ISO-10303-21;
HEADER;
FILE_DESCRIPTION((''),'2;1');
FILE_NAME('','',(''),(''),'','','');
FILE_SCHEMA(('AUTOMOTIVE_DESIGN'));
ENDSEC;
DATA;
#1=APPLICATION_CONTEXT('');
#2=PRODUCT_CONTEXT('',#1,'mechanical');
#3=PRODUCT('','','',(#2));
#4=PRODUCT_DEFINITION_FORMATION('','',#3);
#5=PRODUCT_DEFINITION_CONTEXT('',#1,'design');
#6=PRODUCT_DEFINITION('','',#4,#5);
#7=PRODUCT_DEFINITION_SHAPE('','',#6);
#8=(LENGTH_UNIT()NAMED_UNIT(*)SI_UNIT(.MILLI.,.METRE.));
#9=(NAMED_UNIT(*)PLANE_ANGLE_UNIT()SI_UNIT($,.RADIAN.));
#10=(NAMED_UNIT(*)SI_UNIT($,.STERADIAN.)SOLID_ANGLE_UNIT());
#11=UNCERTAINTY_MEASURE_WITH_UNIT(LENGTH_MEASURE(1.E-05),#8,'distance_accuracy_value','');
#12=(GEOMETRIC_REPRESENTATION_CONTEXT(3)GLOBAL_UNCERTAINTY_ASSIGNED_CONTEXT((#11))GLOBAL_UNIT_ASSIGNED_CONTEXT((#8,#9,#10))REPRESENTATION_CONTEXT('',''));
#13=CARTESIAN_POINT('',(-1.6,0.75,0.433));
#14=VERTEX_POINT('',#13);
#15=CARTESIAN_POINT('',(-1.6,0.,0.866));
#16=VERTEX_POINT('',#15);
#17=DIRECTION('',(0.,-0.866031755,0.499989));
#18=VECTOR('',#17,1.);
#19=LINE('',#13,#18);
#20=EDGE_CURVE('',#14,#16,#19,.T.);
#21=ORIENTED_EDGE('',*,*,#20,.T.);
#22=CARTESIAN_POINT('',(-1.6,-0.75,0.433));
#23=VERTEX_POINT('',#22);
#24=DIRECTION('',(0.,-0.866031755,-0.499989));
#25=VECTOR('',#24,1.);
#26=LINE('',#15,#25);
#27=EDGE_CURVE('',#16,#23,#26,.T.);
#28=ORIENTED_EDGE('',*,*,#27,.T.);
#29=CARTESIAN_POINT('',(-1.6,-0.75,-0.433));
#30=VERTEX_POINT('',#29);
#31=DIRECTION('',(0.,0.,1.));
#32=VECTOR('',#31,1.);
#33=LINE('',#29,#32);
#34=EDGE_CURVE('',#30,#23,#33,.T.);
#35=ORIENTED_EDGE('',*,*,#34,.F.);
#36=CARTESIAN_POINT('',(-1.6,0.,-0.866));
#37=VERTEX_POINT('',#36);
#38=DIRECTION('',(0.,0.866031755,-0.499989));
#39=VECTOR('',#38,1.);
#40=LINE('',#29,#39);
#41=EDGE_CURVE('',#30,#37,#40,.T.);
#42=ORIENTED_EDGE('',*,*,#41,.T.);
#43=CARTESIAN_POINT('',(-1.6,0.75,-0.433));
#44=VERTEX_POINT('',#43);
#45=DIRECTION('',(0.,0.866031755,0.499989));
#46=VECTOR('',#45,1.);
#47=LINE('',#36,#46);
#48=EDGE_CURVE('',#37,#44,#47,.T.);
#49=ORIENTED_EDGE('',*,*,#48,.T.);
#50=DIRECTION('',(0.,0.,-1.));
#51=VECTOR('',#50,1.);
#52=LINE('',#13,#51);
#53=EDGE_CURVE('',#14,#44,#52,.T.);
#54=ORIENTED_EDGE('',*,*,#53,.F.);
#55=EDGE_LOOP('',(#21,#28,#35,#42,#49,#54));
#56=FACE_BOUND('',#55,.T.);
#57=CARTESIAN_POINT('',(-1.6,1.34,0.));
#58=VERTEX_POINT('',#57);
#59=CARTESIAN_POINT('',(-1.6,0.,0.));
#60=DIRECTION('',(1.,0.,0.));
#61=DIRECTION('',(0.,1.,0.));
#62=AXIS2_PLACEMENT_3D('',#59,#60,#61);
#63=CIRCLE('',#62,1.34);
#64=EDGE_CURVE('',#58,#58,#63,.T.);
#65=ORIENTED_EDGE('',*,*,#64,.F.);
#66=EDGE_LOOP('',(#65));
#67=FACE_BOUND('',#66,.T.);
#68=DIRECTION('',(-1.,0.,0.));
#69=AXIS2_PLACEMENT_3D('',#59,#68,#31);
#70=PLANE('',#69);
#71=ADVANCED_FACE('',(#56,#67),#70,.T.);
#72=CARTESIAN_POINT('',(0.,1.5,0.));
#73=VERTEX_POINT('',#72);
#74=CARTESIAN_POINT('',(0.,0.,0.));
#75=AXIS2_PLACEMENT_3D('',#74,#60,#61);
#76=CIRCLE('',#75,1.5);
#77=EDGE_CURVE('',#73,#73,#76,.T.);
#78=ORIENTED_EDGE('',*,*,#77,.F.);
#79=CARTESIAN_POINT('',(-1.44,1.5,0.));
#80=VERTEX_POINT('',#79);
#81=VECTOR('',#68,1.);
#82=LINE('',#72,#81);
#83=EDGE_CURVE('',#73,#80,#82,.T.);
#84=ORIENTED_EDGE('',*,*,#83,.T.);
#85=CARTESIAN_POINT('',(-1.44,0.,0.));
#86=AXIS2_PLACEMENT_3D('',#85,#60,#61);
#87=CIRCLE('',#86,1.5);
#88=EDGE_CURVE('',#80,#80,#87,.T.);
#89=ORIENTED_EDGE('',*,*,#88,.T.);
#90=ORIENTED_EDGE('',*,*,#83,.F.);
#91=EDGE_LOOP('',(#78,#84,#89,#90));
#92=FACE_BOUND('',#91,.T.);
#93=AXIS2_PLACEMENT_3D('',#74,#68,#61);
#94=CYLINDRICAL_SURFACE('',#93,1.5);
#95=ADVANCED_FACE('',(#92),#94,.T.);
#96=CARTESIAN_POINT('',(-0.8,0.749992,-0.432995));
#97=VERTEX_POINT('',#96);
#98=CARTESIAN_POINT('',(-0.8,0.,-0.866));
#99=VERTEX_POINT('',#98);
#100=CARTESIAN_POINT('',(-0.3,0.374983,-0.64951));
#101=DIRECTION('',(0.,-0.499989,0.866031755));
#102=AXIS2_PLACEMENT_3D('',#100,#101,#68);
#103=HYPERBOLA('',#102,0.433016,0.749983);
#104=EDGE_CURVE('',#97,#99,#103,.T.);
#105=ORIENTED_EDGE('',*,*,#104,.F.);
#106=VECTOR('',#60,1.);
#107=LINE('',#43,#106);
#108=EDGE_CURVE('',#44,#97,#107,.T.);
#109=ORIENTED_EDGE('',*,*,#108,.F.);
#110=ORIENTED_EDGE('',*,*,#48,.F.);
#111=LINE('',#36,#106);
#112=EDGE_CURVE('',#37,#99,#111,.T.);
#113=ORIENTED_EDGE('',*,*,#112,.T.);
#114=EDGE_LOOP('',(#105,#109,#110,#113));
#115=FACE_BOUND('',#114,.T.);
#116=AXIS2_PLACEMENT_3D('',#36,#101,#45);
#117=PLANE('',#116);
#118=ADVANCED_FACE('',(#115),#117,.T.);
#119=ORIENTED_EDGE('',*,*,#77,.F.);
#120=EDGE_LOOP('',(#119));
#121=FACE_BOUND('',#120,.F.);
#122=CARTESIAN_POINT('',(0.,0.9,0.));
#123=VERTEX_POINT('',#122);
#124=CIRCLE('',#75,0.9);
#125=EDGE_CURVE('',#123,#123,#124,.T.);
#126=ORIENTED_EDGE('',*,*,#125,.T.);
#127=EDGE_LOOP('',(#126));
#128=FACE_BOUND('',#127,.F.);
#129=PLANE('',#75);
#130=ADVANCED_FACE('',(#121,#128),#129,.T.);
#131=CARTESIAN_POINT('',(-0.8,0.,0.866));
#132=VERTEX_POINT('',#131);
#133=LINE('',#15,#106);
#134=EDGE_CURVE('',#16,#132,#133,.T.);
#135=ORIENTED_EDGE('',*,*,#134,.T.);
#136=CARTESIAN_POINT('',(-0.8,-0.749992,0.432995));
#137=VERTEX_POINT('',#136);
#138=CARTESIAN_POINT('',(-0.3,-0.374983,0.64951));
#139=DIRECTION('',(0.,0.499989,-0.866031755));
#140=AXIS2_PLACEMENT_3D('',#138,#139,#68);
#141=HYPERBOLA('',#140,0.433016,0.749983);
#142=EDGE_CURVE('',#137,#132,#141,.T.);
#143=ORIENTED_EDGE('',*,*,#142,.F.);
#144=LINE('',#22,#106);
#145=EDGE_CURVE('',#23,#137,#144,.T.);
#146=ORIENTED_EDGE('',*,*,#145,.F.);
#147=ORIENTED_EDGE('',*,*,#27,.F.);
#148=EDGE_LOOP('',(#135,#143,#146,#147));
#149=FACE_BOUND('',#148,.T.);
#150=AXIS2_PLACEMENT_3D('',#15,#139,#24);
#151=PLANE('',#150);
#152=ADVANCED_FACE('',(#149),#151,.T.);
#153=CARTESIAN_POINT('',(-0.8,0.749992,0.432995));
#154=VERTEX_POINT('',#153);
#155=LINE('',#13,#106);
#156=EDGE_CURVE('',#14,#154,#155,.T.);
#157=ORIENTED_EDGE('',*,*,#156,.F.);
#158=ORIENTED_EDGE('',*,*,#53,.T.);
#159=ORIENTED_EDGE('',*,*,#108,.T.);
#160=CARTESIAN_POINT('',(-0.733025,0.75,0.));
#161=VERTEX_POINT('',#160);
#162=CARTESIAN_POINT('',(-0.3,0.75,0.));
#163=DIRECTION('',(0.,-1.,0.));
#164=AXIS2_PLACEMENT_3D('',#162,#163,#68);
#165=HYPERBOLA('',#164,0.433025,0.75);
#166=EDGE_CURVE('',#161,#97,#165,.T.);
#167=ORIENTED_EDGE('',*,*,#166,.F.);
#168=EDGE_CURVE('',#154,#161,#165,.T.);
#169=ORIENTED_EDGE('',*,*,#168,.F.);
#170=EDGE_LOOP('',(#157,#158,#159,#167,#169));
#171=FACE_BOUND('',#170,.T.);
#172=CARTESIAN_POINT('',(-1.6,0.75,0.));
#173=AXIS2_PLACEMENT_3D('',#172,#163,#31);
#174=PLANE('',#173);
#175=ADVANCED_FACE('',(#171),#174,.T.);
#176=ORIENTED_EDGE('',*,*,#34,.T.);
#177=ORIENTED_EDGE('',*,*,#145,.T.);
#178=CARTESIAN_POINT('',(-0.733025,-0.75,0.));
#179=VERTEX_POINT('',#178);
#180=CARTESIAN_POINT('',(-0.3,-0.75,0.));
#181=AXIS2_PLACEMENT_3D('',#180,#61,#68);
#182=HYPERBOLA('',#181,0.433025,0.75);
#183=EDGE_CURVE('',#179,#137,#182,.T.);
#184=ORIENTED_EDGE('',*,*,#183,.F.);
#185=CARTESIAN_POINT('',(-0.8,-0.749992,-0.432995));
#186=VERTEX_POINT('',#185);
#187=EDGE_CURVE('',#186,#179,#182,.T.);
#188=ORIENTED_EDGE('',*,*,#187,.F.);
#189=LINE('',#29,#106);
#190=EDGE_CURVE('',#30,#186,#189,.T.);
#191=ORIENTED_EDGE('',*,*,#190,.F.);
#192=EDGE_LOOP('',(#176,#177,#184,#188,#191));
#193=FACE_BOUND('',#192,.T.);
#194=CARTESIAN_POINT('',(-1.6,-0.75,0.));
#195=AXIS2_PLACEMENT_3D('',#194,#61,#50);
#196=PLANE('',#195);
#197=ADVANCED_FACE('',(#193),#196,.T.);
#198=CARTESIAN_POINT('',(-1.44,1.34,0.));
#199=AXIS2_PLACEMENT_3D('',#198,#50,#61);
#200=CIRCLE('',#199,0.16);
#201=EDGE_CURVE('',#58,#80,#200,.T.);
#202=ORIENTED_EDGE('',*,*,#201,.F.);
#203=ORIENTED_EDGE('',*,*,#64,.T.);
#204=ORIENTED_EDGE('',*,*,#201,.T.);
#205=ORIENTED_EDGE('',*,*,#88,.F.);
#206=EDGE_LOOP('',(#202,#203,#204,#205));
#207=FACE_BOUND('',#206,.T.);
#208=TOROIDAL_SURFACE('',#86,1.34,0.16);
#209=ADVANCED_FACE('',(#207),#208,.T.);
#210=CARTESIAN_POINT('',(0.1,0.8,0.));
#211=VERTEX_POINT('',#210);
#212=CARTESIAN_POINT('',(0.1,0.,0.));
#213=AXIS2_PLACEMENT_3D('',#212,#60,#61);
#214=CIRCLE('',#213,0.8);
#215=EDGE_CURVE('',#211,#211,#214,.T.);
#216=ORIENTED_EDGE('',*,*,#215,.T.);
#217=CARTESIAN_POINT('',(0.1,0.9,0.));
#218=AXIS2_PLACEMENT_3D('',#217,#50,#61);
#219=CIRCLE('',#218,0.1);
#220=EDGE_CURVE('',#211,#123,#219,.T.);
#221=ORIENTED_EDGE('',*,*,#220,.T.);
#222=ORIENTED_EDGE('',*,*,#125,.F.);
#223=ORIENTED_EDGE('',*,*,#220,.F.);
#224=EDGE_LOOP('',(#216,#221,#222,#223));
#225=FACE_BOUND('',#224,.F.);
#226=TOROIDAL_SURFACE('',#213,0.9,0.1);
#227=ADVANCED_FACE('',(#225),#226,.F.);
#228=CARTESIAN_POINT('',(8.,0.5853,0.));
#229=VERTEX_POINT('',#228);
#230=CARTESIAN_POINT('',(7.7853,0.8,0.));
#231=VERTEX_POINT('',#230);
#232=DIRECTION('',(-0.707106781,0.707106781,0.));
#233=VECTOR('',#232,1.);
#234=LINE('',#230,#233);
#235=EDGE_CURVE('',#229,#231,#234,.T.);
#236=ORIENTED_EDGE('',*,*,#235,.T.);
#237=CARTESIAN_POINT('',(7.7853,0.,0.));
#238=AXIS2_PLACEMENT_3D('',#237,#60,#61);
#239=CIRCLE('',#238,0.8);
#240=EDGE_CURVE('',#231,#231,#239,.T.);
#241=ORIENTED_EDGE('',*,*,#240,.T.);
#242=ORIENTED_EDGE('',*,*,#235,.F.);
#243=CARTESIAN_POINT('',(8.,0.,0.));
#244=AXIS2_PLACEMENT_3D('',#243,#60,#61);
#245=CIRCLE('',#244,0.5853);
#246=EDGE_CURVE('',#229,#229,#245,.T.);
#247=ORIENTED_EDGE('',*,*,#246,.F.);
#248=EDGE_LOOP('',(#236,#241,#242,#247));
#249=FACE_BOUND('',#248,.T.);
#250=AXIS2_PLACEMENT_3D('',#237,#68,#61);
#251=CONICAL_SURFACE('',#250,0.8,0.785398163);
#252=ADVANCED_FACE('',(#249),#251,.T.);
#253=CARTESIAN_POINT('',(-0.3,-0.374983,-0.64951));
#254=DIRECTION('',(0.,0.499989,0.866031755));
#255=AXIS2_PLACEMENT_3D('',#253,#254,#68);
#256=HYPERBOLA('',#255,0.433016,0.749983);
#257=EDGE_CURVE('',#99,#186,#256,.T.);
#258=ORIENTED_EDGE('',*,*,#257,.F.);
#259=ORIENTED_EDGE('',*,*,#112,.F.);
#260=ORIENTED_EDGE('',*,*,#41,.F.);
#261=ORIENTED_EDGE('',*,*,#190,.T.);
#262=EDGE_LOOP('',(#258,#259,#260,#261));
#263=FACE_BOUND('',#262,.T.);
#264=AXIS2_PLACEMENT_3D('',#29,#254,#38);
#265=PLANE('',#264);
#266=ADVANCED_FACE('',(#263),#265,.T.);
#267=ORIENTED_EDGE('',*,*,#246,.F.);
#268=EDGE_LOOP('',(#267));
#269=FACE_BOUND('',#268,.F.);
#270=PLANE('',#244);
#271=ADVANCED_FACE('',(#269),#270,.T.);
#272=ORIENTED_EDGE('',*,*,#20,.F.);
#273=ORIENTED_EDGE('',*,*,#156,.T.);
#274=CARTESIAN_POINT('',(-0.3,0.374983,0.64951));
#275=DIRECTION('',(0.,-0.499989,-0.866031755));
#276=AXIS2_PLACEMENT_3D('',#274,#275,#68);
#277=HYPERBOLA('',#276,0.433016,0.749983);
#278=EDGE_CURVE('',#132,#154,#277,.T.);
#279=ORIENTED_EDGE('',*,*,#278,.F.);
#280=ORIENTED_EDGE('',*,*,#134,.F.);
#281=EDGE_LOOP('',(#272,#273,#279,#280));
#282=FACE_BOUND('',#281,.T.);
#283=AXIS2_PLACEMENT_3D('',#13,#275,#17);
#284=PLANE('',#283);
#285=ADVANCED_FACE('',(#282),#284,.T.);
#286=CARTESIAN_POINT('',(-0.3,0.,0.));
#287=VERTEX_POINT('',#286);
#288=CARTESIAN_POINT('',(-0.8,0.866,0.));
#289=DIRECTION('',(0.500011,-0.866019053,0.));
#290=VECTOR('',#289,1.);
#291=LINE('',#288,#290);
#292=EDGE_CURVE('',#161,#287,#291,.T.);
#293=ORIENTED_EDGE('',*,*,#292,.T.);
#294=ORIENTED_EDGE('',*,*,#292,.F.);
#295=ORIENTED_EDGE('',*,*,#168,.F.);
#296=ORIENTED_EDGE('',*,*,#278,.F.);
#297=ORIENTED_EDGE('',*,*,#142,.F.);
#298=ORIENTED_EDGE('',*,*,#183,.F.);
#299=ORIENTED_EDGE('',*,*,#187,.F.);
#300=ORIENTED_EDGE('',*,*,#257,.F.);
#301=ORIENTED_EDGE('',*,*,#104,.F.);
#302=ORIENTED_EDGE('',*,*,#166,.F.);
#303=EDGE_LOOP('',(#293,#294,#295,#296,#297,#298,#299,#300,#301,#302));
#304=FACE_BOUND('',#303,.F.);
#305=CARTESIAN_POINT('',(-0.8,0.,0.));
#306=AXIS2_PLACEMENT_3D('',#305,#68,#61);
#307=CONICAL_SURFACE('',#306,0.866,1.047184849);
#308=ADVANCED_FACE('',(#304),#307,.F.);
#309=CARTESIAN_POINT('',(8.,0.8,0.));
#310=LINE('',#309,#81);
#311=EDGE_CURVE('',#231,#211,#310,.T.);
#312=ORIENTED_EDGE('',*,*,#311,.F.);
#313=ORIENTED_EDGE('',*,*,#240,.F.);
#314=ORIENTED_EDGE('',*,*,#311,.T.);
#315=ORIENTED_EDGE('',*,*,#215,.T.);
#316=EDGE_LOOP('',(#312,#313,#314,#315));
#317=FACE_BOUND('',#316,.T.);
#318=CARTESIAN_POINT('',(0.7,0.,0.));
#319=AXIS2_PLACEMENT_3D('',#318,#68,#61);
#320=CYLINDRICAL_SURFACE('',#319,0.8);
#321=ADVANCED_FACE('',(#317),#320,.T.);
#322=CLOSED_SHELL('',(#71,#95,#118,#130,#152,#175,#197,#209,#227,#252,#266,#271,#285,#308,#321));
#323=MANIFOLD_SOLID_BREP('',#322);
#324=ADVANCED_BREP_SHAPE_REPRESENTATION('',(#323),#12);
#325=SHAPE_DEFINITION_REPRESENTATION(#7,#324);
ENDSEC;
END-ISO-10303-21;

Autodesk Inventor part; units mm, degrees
ref_plane "YZ Plane" through (0, 0, 0) normal (1, 0, 0) x (0, 1, 0)
ref_plane "XZ Plane" through (0, 0, 0) normal (0, 1, 0) x (-1, 0, 0)
sketch "Sketch1" plane through (0, 0, 0) normal (0, 0, 1) x (1, 0, 0)
  line L0 (-0.3, 0) -> (8, 0)
  line L1 (8, 0) -> (8, 0.8)
  line L2 (8, 0.8) -> (0.9147, 0.8)
  line L3 (0.9147, 0.8) -> (0.7, 0.8)
  line L4 (0.7, 0.8) -> (0, 0.8)
  line L5 (0, 0.8) -> (0, 1.5)
  line L6 (0, 1.5) -> (-1.6, 1.5)
  line L7 (-1.6, 1.5) -> (-1.6, 0.866)
  line L8 (-1.6, 0.866) -> (-0.8, 0.866)
  line L9 (-0.8, 0.866) -> (-0.3, 0)
  line L10 (-3.52, 0) -> (9.92, 0) projected
  line L11 (0, -0.3) -> (0, 1.8) projected
  line L12 (0.9147, 0.8) -> (0, 0.8) construction
  dimension "d0" = 7.0853
  dimension "d1" = 0.2147
  dimension "d2" = 1.6
  dimension "d3" = 0.8
  dimension "d4" = 60
  dimension "d5" = 1.6
  dimension "d6" = 1.6
  dimension "d7" = 1.7321
  dimension "d8" = 3
  dimension "d19" = 8
revolve "Body" add sketch "Sketch1" angle 360 about axis through (-0.3, 0, 0) along (1, 0, 0)
sketch "Sketch2" plane through (-1.6, 0, 0) normal (-1, 0, 0) x (0, 0, 1)
  circle A0 centre (0, 0) radius 0.866 projected
  line L0 (0, -2.1) -> (0, 2.1) projected
  line L1 (-2.1, 0) -> (2.1, 0) projected
  line L2 (0.866, 0) -> (0.433, -0.75)
  line L3 (0.433, -0.75) -> (-0.433, -0.75)
  line L4 (-0.433, -0.75) -> (-0.866, 0)
  line L5 (-0.866, 0) -> (-0.433, 0.75)
  line L6 (-0.433, 0.75) -> (0.433, 0.75)
  line L7 (0.433, 0.75) -> (0.866, 0)
extrude "Slot" add sketch "Sketch2" against normal up to next contours L7 A0 | A0 L2 | L6 L0 A0 | A0 L0 L3 | L0 L6 A0 | A0 L3 L0 | L4 A0 | A0 L5
fillet "Fillet2" radius 0.16 1 edges at (-1.6, -1.5, 0)
thread "Thread" size "M1.6x0.35" class "6g" standard "ISO Metric profile" length 7.0853
chamfer "Chamfer1" distance 0.2147 distance2 0.2147 1 edges at (8, -0.8, 0) measured on face at (8, 0.1996, -0.1768)
fillet "Fillet1" radius 0.1 1 edges at (0, -0.8, 0)
ref_plane "Work Plane1" through (30, 0, 0) normal (0, -0.5, 0.8660254) x (1, 0, 0)
equation "\"d0\" = GEL"
equation "\"d1\" = GAL"
equation "\"d2\" = KOH"
equation "\"d3\" = INTI"
equation "\"d5\" = GD"
equation "\"d6\" = BDM"
equation "\"d7\" = 1.1547 * SW"
equation "\"d8\" = KOD"
equation "\"d19\" = NLG"
equation "\"d16\" = RR"
equation "\"d12\" = GEL"
equation "\"d14\" = -0.5 * SPD + 0.5 * GD"
equation "\"d15\" = GUL"
equation "\"d29\" = R"
equation "\"GD\" = NND"
equation "\"NLG\" = 8"
equation "\"GEL\" = 7.08529"
equation "\"KOD\" = 3"
equation "\"KOH\" = 1.6"
equation "\"INTI\" = 0.8"
equation "\"GAL\" = 0.61345 * PTC"
equation "\"GUL\" = 0.61345 * PTC"
equation "\"BDM\" = NND"
equation "\"SW\" = 1.5"
equation "\"RR\" = 0.16"
equation "\"SPD\" = 1.17058"
equation "\"d28\" = R"
equation "\"R\" = 0.1"
equation "\"TOA\" = 30deg"
equation "\"THREADDIA\" = 1.6"
equation "\"KOD1\" = KOD"
equation "\"PTC\" = 0.35"
equation "\"NND\" = 1.6"
equation "\"E0\" = 1.155 * SW"
equation "\"GD1\" = THREADDIA - 1.2269 * PTC"
properties part number "ANSI B18.3.1M - M1.6x0.35 x 8, BSHCSM" material "Steel, Mild"
